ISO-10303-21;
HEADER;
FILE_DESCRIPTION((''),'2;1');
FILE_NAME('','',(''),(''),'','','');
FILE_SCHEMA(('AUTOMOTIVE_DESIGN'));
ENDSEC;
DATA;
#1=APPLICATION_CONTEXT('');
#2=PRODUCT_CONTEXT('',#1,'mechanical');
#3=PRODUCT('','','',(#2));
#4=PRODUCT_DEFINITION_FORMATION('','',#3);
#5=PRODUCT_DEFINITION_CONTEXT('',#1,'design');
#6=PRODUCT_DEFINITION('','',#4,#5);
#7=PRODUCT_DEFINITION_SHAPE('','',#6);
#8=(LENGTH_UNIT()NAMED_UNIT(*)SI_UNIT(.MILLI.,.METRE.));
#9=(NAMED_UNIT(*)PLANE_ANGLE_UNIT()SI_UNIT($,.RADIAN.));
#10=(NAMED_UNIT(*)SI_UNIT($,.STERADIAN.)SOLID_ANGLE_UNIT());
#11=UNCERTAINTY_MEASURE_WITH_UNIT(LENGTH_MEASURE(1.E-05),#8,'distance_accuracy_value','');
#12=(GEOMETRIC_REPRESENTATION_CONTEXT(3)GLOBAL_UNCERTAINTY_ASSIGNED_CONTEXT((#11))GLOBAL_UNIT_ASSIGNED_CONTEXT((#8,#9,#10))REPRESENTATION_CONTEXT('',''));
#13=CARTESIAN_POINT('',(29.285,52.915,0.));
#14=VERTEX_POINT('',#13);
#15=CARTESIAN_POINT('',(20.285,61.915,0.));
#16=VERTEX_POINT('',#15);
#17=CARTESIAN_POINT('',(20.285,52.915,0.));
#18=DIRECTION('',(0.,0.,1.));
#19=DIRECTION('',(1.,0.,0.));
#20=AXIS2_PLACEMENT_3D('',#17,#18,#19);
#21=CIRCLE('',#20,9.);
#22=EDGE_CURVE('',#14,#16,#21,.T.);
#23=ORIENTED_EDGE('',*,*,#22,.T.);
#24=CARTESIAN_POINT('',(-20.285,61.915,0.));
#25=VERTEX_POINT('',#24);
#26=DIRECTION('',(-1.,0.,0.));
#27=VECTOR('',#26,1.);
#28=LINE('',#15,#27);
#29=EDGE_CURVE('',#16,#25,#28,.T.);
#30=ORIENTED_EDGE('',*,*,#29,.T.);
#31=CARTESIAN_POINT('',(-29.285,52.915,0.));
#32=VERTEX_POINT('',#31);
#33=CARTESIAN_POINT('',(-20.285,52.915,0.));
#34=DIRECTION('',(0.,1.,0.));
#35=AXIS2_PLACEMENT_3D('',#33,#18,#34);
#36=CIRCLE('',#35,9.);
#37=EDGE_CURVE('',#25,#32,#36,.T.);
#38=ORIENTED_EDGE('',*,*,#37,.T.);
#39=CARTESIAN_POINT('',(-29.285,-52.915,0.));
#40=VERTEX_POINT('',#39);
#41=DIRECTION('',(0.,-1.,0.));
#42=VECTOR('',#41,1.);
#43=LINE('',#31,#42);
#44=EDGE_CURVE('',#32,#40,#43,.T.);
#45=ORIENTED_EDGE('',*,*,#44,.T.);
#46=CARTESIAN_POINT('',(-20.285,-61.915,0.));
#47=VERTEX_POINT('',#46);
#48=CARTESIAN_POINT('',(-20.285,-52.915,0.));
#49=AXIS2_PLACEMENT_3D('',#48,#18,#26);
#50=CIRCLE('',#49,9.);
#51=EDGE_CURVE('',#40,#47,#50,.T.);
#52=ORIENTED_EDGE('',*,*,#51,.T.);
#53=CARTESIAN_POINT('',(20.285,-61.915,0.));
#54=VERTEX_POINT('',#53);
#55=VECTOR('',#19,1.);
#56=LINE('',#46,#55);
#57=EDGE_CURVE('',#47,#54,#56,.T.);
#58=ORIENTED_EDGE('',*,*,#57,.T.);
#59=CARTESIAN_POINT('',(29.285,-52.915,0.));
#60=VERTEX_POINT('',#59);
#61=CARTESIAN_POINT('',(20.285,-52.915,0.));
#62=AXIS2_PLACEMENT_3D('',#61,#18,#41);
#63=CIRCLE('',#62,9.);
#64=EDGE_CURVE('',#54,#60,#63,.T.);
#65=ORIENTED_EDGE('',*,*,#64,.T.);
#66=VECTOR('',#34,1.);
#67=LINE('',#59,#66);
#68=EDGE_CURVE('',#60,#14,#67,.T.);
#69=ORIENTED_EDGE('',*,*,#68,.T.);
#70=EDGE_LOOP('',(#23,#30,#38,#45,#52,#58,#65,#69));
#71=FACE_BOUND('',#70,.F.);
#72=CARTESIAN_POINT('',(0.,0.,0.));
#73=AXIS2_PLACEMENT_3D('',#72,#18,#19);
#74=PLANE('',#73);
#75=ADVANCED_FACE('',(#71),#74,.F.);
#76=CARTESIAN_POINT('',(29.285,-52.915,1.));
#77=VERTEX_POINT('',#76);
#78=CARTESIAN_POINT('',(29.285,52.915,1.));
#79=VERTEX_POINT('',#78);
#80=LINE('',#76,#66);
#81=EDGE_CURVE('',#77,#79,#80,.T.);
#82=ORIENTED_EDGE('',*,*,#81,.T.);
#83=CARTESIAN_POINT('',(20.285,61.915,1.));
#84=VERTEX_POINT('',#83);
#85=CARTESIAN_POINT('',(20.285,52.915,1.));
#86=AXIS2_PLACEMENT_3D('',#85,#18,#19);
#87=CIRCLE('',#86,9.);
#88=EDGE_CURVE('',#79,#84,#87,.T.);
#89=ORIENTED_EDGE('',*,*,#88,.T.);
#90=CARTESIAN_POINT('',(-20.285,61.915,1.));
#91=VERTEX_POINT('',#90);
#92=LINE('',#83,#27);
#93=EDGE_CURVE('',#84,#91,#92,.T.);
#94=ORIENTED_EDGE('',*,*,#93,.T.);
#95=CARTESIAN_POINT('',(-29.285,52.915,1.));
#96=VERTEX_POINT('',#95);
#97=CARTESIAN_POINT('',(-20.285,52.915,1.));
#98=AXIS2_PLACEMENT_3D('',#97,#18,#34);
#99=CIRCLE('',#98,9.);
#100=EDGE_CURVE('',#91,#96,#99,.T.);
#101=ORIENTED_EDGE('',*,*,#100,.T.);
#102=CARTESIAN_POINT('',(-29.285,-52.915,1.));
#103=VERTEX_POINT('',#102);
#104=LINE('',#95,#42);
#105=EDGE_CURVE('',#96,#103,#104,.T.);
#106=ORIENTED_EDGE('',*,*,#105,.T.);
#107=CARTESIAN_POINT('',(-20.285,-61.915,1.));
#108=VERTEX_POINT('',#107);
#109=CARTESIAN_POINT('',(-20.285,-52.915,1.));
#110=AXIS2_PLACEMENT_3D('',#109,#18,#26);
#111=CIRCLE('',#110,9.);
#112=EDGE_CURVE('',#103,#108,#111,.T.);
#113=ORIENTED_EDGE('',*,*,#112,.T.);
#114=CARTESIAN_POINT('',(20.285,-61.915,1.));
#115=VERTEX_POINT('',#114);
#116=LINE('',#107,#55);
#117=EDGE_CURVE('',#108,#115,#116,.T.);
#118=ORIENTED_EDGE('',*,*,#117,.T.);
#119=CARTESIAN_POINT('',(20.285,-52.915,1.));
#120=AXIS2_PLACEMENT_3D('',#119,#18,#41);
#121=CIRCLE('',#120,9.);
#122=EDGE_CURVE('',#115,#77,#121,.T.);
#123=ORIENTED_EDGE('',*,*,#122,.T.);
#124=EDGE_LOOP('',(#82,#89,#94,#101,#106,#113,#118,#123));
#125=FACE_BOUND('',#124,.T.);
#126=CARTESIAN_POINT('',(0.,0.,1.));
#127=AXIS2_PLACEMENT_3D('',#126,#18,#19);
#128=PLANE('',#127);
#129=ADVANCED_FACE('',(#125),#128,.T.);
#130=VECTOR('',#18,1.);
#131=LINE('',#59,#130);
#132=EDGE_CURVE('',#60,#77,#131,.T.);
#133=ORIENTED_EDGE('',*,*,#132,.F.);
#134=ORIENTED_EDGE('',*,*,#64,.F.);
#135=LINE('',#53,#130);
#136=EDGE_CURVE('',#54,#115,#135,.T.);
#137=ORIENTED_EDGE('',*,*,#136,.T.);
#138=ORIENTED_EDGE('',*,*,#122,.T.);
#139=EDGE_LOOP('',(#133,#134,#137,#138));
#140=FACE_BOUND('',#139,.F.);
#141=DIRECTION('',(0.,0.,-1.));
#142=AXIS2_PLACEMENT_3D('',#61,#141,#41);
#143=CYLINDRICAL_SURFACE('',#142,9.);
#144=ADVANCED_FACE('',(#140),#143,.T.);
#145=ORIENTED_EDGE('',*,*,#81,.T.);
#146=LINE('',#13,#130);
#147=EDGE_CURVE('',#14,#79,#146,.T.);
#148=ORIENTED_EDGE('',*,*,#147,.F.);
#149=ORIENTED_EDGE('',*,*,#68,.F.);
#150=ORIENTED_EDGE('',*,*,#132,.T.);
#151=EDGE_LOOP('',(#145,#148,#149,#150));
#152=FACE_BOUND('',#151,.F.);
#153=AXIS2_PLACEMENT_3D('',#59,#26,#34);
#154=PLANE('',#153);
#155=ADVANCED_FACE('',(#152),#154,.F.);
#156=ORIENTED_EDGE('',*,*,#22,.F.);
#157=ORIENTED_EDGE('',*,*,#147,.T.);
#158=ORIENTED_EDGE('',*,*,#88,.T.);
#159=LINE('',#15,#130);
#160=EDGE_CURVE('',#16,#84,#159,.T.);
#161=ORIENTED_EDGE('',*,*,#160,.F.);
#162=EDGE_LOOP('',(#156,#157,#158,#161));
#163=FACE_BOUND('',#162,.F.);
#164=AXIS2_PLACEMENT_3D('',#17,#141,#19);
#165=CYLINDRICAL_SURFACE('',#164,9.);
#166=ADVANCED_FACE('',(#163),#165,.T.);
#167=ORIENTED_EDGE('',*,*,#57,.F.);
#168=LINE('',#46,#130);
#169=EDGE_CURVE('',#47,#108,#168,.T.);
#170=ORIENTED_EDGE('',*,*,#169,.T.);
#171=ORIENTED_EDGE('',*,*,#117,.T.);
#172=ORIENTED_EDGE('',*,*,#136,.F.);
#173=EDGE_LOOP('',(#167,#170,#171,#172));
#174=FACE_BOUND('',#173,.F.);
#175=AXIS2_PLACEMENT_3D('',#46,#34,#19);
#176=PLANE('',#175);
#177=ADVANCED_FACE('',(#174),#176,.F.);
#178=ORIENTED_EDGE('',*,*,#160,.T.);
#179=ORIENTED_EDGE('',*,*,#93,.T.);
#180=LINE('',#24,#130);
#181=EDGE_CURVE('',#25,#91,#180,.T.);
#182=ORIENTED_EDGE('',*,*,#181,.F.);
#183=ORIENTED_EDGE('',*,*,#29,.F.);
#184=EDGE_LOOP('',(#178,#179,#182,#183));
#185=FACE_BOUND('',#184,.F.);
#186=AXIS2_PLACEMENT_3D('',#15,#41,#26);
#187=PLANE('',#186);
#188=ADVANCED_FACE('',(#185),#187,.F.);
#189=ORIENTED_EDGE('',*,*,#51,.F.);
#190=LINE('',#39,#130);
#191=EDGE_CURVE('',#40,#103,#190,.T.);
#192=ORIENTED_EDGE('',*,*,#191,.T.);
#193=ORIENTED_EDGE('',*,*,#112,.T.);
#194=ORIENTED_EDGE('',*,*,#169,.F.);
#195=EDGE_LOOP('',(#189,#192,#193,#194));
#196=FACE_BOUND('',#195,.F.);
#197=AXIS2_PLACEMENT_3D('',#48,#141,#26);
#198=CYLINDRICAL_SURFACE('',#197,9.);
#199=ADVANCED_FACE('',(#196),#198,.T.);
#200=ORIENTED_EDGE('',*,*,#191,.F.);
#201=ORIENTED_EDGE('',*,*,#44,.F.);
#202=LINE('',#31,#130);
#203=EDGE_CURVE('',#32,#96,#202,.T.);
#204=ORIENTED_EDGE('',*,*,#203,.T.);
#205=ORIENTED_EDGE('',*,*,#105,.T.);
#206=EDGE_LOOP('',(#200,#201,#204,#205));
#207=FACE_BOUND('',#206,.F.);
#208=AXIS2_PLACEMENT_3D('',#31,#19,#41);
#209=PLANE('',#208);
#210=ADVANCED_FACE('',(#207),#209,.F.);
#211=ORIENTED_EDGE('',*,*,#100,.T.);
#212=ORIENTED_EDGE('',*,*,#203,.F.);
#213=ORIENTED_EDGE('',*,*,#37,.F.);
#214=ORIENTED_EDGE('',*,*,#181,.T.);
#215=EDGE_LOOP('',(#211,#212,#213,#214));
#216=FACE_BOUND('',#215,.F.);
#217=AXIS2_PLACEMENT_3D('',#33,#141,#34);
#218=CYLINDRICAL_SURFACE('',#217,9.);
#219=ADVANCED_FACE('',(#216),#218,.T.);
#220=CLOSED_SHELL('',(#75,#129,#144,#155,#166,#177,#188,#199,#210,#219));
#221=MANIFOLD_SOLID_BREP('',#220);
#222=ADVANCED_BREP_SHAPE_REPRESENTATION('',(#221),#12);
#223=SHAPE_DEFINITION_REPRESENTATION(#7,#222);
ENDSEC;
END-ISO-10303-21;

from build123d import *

# Parameters (mm, degrees)
F1_DEPTH = 1


# Not quite as in the source:
# - a feature of the source that left no trace in its solid (it failed there, or was rolled back) is left out


with BuildPart() as f1:
    # F0 (on Top) → F1 (new body)
    with BuildSketch(Plane.XY):
        with BuildLine():
            ThreePointArc((29.285, 52.915), (26.6489610307, 59.2789610307), (20.285, 61.915))
            Line((20.285, 61.915), (-20.285, 61.915))
            ThreePointArc((-20.285, 61.915), (-26.6489610307, 59.2789610307), (-29.285, 52.915))
            Line((-29.285, 52.915), (-29.285, -52.915))
            ThreePointArc((-29.285, -52.915), (-26.6489610307, -59.2789610307), (-20.285, -61.915))
            Line((-20.285, -61.915), (20.285, -61.915))
            ThreePointArc((20.285, -61.915), (26.6489610307, -59.2789610307), (29.285, -52.915))
            Line((29.285, -52.915), (29.285, 52.915))
        make_face()
    extrude(amount=F1_DEPTH)


solid = f1.part
